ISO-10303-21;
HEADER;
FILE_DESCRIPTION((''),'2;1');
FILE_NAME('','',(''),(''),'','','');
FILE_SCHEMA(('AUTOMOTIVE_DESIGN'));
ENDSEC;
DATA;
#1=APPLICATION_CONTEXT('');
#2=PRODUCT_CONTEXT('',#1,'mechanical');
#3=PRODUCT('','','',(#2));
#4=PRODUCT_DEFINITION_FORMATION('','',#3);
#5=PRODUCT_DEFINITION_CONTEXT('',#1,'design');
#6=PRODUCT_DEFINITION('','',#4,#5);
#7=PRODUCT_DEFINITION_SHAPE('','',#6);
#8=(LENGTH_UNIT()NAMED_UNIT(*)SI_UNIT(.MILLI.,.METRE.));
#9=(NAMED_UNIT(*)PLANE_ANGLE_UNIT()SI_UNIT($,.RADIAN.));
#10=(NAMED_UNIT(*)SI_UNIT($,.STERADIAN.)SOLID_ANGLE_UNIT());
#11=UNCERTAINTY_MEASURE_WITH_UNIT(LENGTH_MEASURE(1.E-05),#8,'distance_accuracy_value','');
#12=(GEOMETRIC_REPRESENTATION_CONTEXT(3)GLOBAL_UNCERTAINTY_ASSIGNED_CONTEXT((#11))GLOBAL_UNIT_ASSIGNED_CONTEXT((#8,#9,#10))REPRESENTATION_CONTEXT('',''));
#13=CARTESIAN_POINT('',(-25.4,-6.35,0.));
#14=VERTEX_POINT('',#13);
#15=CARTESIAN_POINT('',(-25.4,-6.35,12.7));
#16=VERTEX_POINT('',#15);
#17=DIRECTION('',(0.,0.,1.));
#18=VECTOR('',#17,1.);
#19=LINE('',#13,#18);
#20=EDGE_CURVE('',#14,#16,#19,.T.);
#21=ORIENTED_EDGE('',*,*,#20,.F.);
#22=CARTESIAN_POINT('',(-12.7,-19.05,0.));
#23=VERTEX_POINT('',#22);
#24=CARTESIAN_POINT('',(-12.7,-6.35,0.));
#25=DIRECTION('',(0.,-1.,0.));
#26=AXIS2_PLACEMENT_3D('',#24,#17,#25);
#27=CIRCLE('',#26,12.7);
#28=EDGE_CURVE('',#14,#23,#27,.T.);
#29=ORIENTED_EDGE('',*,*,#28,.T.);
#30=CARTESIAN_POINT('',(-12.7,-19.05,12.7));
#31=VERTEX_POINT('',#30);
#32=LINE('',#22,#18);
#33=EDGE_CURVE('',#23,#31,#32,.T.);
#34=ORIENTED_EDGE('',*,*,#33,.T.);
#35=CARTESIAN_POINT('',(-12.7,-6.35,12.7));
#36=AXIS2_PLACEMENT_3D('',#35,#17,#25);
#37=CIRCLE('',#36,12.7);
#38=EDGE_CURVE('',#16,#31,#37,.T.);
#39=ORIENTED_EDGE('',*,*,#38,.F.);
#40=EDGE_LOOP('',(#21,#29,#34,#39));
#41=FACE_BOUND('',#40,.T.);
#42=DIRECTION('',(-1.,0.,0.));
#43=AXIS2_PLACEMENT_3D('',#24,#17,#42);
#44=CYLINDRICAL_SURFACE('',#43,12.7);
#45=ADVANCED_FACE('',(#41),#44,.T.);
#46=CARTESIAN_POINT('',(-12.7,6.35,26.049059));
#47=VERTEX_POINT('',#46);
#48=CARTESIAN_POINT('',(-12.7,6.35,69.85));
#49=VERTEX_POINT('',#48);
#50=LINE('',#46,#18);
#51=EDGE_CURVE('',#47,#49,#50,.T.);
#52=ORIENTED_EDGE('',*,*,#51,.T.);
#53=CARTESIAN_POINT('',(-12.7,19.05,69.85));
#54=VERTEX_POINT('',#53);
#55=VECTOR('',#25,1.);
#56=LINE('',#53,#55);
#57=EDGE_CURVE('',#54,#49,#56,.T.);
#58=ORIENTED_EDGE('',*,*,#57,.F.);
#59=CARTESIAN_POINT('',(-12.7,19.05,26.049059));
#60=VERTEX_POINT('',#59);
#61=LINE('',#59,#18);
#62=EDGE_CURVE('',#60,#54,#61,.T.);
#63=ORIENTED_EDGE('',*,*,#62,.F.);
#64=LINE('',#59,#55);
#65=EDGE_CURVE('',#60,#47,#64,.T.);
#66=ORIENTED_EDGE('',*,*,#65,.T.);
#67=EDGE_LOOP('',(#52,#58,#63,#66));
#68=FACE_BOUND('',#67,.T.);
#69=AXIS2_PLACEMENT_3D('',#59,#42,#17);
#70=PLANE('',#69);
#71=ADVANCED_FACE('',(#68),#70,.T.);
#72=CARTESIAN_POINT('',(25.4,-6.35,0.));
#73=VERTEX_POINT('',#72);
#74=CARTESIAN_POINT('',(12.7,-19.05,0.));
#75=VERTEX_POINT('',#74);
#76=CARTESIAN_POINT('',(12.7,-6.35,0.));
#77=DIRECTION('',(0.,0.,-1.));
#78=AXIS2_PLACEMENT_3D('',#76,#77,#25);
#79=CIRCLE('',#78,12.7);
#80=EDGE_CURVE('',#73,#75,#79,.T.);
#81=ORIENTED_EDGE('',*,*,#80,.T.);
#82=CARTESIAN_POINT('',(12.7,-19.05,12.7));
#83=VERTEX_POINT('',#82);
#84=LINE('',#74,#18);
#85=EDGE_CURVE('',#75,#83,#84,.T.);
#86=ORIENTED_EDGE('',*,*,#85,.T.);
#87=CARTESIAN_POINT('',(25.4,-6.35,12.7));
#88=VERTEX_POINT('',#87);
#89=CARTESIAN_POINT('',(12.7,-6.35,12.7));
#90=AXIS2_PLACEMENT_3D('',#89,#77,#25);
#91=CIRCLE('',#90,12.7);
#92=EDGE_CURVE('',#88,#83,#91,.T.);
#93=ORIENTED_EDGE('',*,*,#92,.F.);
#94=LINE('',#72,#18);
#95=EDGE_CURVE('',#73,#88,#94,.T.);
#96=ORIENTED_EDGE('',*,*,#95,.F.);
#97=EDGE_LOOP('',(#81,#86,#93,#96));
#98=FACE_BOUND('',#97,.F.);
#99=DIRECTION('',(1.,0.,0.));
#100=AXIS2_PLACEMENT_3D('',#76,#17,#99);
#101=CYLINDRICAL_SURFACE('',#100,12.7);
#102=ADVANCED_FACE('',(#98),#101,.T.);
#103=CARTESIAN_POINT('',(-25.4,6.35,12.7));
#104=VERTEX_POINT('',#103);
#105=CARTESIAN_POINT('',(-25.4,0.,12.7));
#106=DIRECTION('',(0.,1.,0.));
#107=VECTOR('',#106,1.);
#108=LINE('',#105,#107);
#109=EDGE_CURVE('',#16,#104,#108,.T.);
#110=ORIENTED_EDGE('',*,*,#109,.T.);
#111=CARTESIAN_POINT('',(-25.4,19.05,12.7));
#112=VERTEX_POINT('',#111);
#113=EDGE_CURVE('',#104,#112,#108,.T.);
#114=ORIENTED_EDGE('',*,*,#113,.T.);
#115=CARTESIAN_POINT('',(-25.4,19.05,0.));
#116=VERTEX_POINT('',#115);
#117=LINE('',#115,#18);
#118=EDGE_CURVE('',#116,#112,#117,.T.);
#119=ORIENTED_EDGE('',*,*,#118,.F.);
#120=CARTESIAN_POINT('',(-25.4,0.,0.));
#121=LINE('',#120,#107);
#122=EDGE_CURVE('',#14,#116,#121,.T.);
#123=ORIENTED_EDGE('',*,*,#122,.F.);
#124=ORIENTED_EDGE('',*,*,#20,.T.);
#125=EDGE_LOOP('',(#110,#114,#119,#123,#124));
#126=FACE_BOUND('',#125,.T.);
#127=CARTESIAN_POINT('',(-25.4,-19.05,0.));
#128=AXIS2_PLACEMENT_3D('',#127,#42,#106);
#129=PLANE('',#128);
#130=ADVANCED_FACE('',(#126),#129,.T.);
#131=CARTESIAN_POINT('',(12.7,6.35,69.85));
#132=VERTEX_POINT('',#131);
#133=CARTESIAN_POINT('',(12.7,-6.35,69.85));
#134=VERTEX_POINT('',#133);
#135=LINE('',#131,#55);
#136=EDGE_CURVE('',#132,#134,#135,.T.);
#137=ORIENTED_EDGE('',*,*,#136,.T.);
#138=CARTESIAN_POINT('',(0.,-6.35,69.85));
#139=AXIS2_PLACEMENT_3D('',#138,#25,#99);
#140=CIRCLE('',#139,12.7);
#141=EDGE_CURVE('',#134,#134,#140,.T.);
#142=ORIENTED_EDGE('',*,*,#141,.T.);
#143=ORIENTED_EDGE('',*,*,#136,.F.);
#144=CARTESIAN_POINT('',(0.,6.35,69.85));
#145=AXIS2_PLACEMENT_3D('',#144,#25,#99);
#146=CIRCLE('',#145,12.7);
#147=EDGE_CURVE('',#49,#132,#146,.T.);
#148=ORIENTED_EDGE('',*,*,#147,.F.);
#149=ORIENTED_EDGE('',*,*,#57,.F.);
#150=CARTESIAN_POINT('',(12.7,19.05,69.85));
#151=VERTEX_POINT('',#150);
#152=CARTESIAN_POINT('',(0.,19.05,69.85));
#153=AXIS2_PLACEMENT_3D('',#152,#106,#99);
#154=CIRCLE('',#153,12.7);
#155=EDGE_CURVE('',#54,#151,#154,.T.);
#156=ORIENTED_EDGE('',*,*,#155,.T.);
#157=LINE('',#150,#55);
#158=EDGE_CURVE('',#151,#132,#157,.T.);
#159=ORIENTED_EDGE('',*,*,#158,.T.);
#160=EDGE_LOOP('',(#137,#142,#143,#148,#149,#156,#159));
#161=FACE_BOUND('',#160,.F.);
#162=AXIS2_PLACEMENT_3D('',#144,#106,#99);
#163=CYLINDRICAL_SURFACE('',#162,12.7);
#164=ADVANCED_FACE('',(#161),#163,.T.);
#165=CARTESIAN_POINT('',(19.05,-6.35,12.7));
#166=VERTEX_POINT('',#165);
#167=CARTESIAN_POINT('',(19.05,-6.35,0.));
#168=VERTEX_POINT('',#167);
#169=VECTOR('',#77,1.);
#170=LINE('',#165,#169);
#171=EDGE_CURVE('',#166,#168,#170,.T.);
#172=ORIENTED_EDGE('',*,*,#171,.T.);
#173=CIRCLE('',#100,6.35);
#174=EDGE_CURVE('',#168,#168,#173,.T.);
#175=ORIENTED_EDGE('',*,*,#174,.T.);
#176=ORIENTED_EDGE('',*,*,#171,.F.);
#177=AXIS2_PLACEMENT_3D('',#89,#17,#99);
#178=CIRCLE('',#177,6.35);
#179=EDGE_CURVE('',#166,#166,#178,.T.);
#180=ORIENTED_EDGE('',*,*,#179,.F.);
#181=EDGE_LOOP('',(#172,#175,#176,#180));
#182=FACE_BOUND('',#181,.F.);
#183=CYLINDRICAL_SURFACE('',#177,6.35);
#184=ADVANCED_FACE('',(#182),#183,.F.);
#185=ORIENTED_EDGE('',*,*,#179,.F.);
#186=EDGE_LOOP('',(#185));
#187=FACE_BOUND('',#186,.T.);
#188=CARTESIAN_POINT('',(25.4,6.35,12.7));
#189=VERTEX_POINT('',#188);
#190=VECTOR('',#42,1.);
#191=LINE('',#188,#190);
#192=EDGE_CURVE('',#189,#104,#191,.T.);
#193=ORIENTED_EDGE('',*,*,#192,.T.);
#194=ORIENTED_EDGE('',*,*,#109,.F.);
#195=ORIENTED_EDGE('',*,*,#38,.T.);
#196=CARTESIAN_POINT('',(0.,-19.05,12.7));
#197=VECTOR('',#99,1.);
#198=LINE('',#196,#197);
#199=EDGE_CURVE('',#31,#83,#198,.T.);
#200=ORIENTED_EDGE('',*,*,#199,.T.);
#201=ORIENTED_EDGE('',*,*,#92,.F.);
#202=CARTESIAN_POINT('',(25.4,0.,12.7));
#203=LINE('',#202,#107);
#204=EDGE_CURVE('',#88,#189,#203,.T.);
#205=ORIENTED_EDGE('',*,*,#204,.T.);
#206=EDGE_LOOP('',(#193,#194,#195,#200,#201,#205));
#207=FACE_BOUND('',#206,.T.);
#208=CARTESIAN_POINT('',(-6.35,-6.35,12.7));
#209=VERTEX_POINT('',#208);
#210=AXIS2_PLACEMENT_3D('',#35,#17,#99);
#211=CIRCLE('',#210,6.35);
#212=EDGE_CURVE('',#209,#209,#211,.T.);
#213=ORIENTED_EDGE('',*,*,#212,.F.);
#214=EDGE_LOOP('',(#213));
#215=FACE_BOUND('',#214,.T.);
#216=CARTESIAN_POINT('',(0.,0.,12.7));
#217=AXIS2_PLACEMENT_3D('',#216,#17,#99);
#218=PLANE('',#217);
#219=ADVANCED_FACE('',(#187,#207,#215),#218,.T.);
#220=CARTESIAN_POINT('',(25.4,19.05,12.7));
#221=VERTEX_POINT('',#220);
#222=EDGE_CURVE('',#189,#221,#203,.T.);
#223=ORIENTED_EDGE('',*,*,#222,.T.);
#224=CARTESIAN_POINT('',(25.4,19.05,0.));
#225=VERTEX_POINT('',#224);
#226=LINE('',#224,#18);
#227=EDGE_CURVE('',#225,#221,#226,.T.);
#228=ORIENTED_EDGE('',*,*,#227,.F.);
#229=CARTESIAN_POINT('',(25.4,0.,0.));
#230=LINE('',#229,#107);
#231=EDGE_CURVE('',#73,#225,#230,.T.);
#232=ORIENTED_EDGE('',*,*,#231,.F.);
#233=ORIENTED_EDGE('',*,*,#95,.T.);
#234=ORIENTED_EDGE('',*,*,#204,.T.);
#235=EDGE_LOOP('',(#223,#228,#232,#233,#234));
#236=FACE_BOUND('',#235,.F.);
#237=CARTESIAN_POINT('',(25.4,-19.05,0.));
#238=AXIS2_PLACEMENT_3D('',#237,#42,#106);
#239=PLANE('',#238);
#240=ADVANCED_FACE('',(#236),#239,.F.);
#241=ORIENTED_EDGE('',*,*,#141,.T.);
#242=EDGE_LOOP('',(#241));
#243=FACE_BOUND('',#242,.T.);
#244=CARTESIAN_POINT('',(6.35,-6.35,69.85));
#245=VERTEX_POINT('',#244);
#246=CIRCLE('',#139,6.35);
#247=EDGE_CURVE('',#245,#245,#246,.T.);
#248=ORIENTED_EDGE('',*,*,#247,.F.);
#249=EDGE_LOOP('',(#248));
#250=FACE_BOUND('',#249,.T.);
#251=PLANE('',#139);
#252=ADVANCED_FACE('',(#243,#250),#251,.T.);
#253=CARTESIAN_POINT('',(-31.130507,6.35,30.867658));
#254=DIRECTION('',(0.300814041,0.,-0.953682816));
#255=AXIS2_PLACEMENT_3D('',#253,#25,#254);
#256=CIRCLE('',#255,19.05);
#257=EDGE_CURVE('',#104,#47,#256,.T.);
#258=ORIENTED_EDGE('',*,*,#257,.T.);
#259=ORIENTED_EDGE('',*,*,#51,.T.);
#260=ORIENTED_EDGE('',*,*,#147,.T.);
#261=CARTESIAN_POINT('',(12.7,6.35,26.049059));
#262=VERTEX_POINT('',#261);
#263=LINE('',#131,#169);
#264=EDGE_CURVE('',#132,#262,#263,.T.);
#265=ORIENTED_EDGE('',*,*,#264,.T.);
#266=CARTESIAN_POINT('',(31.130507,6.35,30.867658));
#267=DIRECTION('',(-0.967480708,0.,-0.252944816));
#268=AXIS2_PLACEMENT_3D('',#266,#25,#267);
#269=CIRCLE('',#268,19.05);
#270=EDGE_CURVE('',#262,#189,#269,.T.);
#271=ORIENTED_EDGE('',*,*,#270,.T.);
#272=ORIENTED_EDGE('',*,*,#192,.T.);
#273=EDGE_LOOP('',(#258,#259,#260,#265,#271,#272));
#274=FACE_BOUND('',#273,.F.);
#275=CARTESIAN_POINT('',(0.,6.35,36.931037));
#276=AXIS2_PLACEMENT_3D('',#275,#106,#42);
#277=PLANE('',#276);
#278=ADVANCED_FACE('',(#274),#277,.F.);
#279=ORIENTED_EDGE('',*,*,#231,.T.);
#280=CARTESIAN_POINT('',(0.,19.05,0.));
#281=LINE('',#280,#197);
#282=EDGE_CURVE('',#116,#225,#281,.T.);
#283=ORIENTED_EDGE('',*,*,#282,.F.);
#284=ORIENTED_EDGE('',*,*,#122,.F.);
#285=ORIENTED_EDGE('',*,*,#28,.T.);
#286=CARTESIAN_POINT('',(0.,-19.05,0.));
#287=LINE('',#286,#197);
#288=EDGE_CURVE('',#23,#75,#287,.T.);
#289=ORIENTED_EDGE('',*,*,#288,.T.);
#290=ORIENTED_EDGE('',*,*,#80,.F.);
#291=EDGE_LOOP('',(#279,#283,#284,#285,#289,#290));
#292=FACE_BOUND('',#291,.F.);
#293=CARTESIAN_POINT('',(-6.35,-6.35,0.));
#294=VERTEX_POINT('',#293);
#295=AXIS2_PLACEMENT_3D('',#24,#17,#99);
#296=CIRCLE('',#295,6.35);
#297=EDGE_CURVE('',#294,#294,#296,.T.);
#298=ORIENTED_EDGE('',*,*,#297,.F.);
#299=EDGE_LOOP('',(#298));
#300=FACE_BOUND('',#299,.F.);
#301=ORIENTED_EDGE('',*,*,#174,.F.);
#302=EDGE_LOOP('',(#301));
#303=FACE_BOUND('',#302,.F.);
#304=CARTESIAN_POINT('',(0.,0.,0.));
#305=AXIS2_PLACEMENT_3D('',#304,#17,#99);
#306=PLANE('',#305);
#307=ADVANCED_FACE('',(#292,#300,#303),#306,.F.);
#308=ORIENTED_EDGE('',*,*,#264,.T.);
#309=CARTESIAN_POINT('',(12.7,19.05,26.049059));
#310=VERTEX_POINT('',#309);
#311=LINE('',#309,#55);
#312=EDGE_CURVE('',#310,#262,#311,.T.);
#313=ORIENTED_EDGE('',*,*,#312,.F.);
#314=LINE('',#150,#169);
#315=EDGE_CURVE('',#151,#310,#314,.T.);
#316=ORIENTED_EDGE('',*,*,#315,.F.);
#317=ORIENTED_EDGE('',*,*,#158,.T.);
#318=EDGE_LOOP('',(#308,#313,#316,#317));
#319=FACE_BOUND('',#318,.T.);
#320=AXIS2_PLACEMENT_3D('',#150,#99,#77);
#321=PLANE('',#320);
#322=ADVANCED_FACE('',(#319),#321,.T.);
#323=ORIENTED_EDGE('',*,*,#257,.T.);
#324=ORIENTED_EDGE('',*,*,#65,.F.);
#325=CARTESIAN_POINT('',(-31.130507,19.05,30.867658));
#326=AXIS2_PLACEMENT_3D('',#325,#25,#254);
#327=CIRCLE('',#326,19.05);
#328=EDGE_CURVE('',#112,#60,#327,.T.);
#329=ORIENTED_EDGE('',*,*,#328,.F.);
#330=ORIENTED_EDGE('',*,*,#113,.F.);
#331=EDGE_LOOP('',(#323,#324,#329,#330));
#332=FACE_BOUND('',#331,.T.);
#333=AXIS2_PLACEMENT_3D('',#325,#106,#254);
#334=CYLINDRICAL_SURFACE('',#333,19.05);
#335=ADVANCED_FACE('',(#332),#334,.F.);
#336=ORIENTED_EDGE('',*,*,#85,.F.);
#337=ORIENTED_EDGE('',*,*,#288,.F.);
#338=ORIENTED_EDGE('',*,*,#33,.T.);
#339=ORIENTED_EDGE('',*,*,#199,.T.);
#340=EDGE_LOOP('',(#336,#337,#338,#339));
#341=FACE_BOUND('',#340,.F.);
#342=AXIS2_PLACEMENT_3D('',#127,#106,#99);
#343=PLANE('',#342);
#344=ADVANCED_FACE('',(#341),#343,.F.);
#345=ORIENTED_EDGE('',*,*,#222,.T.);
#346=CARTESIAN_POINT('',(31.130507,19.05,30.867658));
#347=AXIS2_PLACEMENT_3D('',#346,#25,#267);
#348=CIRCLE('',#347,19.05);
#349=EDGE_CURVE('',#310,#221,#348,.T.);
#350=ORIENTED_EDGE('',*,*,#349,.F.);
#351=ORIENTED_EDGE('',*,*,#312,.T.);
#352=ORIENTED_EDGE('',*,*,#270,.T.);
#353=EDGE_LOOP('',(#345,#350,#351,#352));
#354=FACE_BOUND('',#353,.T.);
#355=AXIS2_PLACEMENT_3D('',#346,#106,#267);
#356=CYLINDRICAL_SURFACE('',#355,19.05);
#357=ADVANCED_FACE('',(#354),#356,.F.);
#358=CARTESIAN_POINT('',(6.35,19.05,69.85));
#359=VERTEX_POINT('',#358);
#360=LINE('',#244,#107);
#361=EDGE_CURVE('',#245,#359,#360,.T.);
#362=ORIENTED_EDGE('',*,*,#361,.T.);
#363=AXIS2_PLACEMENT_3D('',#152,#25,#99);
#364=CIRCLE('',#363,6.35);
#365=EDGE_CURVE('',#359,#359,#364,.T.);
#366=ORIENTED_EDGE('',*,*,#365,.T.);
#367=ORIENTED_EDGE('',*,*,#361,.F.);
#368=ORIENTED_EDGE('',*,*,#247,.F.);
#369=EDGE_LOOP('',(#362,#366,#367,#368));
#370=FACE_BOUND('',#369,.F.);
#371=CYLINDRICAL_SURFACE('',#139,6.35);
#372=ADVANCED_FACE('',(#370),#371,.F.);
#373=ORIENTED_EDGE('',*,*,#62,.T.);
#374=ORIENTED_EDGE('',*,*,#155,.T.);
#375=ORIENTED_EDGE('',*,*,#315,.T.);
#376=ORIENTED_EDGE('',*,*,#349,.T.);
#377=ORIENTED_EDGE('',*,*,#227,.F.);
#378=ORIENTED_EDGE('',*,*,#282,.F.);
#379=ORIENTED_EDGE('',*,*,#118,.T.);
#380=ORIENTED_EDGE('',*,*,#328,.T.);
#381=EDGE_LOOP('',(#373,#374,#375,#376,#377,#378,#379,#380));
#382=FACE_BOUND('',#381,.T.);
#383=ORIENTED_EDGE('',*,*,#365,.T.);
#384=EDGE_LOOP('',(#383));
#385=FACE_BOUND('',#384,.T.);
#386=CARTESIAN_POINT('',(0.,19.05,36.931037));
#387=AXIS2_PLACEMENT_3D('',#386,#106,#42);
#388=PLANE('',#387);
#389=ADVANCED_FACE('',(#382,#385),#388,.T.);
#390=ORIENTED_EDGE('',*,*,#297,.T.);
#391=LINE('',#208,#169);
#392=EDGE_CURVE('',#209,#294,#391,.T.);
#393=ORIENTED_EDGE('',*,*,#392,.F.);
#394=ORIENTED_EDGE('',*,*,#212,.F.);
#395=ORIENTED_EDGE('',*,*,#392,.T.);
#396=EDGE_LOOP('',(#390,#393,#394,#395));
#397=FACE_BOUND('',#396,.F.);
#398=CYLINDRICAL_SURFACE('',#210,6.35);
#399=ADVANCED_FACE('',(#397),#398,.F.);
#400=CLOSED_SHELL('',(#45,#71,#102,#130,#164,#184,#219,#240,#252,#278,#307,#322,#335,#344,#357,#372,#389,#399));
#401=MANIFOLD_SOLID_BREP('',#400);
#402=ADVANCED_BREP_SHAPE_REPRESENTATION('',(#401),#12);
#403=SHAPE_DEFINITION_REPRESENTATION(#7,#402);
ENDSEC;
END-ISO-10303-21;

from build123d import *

# Parameters (mm, degrees)
F0_W     = 50.8
F0_H     = 38.1
F1_DEPTH = 12.7
F3_DEPTH = 12.7
F5_DEPTH = 12.7
F6_R     = 6.3499999233
F7_DEPTH = 25.401
F8_R     = 6.35
F9_DEPTH = 12.701
F10_R    = 12.7


with BuildPart() as f1:
    # F0 (on Top) → F1 (new body)
    with BuildSketch(Plane.XY):
        Rectangle(F0_W, F0_H)
    extrude(amount=F1_DEPTH)

    # F2 (on face) → F3 (join)
    with BuildSketch(Plane(origin=(0, 19.05, 0), x_dir=(-1, 0, 0), z_dir=(0, 1, 0))):
        with BuildLine():
            ThreePointArc((-12.7, 26.0490588844), (-17.3287683055, 17.7369875968), (-25.4, 12.7))
            Line((-25.4, 12.7), (-12.7, 12.7))
            Line((-12.7, 12.7), (12.7, 12.7))
            Line((12.7, 12.7), (25.4, 12.7))
            ThreePointArc((25.4, 12.7), (17.3287683055, 17.7369875968), (12.7, 26.0490588844))
            Line((12.7, 26.0490588844), (12.7, 69.85))
            ThreePointArc((12.7, 69.85), (0, 57.15), (-12.7, 69.85))
            Line((-12.7, 69.85), (-12.7, 26.0490588844))
        make_face()
        with BuildLine():
            ThreePointArc((12.7, 69.85), (0, 82.55), (-12.7, 69.85))
            ThreePointArc((-12.7, 69.85), (0, 57.15), (12.7, 69.85))
        make_face()
    extrude(amount=-F3_DEPTH)

    # F4 (on face) → F5 (join)
    with BuildSketch(Plane.XZ.offset(-6.35)):
        with BuildLine():
            ThreePointArc((-12.7, 69.85), (0, 57.15), (12.7, 69.85))
            ThreePointArc((12.7, 69.85), (0, 82.55), (-12.7, 69.85))
        make_face()
    extrude(amount=F5_DEPTH)

    # F6 (on face) → F7 (cut, through all)
    with BuildSketch(Plane.XZ.offset(6.35)):
        with Locations((0, 69.85)):
            Circle(F6_R)
    extrude(amount=-F7_DEPTH, mode=Mode.SUBTRACT)

    # F8 (on face) → F9 (cut, through all)
    with BuildSketch(Plane.XY.offset(12.7)):
        with Locations((-12.7, -6.35)):
            Circle(F8_R)
        with Locations((12.7, -6.35)):
            Circle(F8_R)
    extrude(amount=-F9_DEPTH, mode=Mode.SUBTRACT)

    # F10
    f10_edges = [f1.edges().sort_by_distance(p)[0] for p in [
        (-25.4, -19.05, 6.35),
        (25.4, -19.05, 6.35),
    ]]
    fillet(f10_edges, radius=F10_R)


solid = f1.part
